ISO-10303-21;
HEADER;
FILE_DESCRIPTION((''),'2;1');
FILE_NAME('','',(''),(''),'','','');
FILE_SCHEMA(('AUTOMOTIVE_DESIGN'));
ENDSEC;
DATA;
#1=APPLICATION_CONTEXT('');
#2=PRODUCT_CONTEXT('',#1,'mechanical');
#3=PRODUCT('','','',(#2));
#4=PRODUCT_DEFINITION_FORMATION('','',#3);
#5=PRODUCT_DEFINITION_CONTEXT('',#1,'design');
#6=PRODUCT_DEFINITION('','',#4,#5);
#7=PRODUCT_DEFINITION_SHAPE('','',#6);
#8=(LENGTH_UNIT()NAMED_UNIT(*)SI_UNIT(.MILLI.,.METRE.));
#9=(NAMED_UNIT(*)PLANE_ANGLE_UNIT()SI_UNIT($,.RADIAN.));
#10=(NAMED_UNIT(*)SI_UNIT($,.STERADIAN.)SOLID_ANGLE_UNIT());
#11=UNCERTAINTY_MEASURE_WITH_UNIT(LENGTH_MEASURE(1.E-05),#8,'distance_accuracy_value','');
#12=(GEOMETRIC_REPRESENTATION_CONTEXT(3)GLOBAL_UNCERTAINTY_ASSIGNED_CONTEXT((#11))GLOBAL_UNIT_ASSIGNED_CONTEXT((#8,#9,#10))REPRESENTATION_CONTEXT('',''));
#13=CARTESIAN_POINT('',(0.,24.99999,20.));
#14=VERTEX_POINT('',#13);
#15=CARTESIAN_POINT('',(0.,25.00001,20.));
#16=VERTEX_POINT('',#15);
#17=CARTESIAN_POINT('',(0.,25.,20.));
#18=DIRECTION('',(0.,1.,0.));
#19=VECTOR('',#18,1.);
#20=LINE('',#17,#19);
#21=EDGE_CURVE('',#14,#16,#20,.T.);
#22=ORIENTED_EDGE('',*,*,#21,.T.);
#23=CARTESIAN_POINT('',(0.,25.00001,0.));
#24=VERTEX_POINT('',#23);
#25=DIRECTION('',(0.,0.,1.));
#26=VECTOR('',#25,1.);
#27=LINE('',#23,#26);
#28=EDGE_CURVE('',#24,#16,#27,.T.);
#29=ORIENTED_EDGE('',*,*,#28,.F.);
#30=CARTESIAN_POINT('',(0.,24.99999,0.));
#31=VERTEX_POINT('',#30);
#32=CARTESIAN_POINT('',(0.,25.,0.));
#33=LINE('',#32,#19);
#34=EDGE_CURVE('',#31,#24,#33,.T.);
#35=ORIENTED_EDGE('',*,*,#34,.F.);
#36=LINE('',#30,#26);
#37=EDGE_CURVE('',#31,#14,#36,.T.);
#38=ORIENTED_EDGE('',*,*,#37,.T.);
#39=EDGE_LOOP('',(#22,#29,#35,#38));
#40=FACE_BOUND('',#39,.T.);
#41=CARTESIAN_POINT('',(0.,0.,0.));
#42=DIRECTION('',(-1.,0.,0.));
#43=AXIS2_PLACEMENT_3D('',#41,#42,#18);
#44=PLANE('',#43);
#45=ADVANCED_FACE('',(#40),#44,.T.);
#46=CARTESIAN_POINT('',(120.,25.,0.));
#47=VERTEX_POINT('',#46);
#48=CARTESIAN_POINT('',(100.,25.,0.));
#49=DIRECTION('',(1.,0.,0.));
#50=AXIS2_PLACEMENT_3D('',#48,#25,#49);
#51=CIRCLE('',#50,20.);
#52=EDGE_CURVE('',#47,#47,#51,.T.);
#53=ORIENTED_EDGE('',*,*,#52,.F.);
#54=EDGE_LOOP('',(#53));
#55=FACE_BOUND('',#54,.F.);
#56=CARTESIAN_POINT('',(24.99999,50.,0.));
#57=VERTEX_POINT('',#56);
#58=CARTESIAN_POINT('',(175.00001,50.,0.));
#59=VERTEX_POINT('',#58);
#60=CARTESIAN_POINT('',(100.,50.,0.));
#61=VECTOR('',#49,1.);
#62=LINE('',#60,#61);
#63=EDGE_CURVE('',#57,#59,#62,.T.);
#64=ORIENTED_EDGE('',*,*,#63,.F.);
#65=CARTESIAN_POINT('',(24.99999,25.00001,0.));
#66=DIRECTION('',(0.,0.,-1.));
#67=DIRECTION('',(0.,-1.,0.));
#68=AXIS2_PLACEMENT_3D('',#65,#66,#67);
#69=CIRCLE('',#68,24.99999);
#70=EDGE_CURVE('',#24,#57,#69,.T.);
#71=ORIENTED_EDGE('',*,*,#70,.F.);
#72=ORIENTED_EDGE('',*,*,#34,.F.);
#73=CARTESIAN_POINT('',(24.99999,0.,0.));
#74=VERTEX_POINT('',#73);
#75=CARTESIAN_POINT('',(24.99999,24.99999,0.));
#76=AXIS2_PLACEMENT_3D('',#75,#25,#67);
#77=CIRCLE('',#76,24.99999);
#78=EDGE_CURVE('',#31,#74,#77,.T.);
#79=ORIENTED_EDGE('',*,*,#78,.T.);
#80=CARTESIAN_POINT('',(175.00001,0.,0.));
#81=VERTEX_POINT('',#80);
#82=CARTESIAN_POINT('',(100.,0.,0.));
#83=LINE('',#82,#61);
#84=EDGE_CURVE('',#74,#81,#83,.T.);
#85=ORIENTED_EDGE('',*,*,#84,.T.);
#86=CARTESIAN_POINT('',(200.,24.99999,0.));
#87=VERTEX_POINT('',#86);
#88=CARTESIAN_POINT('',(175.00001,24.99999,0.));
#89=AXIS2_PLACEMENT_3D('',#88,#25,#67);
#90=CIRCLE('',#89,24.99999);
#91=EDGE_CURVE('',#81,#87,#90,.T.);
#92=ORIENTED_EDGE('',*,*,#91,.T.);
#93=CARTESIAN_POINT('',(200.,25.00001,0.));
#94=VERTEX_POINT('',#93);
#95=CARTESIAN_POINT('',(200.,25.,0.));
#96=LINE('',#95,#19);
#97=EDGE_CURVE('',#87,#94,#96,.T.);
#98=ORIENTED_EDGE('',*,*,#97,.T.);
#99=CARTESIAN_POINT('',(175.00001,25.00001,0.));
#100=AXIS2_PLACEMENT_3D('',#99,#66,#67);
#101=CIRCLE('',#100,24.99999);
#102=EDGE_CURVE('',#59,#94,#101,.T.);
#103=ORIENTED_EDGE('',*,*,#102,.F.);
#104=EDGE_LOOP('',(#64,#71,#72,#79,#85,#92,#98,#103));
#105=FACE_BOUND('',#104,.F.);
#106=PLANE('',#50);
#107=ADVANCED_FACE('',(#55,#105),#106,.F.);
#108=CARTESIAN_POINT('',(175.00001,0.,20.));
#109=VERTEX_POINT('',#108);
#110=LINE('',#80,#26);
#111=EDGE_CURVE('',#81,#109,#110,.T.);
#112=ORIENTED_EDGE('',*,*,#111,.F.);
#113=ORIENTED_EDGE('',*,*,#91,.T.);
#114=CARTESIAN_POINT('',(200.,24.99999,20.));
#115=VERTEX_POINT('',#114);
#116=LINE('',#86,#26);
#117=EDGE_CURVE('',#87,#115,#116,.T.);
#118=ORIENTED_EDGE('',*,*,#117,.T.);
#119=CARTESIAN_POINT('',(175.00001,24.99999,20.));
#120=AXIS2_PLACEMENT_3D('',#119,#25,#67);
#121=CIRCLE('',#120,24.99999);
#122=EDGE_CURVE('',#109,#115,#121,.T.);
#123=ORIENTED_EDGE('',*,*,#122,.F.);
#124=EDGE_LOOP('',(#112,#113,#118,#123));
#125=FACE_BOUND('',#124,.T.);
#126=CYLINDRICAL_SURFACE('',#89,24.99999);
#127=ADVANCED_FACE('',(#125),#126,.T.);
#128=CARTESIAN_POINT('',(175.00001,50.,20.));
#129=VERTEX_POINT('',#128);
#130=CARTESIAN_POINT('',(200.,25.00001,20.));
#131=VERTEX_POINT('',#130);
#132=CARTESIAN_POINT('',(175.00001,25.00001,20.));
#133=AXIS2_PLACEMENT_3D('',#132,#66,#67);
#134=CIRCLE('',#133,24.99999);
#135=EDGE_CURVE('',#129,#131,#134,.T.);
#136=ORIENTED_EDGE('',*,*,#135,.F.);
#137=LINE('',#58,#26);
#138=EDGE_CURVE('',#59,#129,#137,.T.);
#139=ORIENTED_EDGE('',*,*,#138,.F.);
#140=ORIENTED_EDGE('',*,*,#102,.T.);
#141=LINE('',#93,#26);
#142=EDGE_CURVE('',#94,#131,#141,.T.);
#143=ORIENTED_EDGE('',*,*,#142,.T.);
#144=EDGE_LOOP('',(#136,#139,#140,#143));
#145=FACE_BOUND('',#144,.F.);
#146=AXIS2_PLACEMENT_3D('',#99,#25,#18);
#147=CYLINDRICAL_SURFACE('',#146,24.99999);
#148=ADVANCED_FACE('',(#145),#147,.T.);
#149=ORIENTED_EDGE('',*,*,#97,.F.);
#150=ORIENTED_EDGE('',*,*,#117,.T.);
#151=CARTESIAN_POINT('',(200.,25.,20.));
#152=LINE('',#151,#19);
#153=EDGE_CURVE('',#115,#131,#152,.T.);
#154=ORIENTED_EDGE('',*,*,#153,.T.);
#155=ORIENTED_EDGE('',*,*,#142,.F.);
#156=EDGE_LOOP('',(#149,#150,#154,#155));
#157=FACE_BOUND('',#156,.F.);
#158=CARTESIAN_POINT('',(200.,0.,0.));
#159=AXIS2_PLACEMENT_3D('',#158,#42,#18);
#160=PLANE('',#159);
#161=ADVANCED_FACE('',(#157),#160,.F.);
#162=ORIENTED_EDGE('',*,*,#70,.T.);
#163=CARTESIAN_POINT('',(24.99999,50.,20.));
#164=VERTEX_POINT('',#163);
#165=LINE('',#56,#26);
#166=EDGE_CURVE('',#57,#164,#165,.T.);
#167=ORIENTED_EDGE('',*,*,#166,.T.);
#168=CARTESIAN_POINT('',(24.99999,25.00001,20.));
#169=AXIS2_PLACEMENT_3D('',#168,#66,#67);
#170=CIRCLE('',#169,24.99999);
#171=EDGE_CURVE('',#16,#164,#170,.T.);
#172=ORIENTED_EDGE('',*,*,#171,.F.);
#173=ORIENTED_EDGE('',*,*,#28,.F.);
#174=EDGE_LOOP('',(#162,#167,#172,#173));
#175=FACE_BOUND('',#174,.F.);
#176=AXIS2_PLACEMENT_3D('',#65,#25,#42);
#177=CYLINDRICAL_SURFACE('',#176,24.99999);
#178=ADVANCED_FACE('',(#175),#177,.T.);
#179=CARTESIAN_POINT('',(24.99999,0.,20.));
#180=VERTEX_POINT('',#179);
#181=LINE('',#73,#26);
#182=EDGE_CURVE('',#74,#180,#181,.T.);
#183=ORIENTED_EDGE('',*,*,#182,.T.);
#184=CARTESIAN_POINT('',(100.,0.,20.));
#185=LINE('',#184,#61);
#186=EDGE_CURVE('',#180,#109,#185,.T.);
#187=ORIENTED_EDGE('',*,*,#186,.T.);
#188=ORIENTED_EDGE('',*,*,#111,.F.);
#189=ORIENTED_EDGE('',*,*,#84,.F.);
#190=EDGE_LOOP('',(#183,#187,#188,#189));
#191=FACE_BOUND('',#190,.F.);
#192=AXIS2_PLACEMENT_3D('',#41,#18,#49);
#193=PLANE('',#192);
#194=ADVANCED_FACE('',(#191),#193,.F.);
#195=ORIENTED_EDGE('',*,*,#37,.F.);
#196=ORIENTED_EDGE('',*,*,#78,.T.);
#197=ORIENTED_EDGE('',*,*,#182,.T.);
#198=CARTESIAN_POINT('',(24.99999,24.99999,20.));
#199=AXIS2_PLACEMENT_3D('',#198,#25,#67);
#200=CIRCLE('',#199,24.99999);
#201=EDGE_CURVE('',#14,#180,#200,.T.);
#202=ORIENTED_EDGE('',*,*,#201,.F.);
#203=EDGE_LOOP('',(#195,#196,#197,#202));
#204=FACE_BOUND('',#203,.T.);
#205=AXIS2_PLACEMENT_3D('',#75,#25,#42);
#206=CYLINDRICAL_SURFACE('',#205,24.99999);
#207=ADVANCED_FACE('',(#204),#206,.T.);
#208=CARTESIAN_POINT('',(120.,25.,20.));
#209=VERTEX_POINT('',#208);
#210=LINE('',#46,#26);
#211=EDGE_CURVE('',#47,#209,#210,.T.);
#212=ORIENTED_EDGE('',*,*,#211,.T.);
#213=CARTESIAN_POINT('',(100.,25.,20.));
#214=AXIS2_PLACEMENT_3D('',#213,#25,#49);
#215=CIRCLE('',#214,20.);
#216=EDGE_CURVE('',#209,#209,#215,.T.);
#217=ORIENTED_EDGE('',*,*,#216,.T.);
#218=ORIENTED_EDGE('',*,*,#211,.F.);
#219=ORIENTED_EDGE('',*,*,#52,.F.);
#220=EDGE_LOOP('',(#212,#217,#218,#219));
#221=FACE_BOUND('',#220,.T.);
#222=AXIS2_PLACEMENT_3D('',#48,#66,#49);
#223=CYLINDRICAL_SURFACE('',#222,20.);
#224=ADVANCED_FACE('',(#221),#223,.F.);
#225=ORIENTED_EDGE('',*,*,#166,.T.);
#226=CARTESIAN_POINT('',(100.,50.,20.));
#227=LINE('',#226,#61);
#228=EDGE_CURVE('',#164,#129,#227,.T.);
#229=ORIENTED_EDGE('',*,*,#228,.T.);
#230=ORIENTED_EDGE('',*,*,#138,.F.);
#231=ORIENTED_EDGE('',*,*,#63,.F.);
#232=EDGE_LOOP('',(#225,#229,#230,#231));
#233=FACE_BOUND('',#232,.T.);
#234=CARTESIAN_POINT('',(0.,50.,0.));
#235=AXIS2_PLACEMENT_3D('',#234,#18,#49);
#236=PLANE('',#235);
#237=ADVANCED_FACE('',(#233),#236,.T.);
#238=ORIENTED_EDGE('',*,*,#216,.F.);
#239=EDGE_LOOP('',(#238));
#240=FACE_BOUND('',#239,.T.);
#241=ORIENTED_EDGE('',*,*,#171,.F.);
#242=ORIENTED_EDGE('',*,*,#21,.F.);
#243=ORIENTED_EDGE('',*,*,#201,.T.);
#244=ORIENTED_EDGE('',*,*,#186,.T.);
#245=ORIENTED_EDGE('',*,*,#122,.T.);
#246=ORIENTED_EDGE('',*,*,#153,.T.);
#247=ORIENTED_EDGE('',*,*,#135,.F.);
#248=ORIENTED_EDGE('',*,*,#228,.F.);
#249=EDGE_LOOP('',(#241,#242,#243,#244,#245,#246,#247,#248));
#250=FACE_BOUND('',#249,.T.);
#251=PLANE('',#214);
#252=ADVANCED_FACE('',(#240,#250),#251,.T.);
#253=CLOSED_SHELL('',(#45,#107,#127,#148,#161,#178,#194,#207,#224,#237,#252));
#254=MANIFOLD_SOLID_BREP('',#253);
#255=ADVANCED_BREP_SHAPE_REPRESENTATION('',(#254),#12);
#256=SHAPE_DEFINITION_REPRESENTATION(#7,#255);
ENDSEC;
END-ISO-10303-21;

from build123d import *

# Parameters (mm, degrees)
F0_W     = 200
F0_H     = 50
F0_R     = 20
F1_DEPTH = 20
F2_R     = 24.99999


# Not quite as in the source:
# - a fillet or chamfer is up to 0.001 mm smaller than in the source, because OpenCascade refuses the exact size


with BuildPart() as f1:
    # F0 (on Top) → F1 (new body)
    with BuildSketch(Plane.XY):
        with Locations((100, 25)):
            Rectangle(F0_W, F0_H)
        with Locations((100, 25)):
            Circle(F0_R, mode=Mode.SUBTRACT)
    extrude(amount=F1_DEPTH)

    # F2 (radius 25 in the source; OpenCascade refuses exactly that, so slightly less here)
    f2_edges = [f1.edges().sort_by_distance(p)[0] for p in [
        (200, 0, 10),
        (0, 50, 10),
        (0, 0, 10),
        (200, 50, 10),
    ]]
    fillet(f2_edges, radius=F2_R)


solid = f1.part
